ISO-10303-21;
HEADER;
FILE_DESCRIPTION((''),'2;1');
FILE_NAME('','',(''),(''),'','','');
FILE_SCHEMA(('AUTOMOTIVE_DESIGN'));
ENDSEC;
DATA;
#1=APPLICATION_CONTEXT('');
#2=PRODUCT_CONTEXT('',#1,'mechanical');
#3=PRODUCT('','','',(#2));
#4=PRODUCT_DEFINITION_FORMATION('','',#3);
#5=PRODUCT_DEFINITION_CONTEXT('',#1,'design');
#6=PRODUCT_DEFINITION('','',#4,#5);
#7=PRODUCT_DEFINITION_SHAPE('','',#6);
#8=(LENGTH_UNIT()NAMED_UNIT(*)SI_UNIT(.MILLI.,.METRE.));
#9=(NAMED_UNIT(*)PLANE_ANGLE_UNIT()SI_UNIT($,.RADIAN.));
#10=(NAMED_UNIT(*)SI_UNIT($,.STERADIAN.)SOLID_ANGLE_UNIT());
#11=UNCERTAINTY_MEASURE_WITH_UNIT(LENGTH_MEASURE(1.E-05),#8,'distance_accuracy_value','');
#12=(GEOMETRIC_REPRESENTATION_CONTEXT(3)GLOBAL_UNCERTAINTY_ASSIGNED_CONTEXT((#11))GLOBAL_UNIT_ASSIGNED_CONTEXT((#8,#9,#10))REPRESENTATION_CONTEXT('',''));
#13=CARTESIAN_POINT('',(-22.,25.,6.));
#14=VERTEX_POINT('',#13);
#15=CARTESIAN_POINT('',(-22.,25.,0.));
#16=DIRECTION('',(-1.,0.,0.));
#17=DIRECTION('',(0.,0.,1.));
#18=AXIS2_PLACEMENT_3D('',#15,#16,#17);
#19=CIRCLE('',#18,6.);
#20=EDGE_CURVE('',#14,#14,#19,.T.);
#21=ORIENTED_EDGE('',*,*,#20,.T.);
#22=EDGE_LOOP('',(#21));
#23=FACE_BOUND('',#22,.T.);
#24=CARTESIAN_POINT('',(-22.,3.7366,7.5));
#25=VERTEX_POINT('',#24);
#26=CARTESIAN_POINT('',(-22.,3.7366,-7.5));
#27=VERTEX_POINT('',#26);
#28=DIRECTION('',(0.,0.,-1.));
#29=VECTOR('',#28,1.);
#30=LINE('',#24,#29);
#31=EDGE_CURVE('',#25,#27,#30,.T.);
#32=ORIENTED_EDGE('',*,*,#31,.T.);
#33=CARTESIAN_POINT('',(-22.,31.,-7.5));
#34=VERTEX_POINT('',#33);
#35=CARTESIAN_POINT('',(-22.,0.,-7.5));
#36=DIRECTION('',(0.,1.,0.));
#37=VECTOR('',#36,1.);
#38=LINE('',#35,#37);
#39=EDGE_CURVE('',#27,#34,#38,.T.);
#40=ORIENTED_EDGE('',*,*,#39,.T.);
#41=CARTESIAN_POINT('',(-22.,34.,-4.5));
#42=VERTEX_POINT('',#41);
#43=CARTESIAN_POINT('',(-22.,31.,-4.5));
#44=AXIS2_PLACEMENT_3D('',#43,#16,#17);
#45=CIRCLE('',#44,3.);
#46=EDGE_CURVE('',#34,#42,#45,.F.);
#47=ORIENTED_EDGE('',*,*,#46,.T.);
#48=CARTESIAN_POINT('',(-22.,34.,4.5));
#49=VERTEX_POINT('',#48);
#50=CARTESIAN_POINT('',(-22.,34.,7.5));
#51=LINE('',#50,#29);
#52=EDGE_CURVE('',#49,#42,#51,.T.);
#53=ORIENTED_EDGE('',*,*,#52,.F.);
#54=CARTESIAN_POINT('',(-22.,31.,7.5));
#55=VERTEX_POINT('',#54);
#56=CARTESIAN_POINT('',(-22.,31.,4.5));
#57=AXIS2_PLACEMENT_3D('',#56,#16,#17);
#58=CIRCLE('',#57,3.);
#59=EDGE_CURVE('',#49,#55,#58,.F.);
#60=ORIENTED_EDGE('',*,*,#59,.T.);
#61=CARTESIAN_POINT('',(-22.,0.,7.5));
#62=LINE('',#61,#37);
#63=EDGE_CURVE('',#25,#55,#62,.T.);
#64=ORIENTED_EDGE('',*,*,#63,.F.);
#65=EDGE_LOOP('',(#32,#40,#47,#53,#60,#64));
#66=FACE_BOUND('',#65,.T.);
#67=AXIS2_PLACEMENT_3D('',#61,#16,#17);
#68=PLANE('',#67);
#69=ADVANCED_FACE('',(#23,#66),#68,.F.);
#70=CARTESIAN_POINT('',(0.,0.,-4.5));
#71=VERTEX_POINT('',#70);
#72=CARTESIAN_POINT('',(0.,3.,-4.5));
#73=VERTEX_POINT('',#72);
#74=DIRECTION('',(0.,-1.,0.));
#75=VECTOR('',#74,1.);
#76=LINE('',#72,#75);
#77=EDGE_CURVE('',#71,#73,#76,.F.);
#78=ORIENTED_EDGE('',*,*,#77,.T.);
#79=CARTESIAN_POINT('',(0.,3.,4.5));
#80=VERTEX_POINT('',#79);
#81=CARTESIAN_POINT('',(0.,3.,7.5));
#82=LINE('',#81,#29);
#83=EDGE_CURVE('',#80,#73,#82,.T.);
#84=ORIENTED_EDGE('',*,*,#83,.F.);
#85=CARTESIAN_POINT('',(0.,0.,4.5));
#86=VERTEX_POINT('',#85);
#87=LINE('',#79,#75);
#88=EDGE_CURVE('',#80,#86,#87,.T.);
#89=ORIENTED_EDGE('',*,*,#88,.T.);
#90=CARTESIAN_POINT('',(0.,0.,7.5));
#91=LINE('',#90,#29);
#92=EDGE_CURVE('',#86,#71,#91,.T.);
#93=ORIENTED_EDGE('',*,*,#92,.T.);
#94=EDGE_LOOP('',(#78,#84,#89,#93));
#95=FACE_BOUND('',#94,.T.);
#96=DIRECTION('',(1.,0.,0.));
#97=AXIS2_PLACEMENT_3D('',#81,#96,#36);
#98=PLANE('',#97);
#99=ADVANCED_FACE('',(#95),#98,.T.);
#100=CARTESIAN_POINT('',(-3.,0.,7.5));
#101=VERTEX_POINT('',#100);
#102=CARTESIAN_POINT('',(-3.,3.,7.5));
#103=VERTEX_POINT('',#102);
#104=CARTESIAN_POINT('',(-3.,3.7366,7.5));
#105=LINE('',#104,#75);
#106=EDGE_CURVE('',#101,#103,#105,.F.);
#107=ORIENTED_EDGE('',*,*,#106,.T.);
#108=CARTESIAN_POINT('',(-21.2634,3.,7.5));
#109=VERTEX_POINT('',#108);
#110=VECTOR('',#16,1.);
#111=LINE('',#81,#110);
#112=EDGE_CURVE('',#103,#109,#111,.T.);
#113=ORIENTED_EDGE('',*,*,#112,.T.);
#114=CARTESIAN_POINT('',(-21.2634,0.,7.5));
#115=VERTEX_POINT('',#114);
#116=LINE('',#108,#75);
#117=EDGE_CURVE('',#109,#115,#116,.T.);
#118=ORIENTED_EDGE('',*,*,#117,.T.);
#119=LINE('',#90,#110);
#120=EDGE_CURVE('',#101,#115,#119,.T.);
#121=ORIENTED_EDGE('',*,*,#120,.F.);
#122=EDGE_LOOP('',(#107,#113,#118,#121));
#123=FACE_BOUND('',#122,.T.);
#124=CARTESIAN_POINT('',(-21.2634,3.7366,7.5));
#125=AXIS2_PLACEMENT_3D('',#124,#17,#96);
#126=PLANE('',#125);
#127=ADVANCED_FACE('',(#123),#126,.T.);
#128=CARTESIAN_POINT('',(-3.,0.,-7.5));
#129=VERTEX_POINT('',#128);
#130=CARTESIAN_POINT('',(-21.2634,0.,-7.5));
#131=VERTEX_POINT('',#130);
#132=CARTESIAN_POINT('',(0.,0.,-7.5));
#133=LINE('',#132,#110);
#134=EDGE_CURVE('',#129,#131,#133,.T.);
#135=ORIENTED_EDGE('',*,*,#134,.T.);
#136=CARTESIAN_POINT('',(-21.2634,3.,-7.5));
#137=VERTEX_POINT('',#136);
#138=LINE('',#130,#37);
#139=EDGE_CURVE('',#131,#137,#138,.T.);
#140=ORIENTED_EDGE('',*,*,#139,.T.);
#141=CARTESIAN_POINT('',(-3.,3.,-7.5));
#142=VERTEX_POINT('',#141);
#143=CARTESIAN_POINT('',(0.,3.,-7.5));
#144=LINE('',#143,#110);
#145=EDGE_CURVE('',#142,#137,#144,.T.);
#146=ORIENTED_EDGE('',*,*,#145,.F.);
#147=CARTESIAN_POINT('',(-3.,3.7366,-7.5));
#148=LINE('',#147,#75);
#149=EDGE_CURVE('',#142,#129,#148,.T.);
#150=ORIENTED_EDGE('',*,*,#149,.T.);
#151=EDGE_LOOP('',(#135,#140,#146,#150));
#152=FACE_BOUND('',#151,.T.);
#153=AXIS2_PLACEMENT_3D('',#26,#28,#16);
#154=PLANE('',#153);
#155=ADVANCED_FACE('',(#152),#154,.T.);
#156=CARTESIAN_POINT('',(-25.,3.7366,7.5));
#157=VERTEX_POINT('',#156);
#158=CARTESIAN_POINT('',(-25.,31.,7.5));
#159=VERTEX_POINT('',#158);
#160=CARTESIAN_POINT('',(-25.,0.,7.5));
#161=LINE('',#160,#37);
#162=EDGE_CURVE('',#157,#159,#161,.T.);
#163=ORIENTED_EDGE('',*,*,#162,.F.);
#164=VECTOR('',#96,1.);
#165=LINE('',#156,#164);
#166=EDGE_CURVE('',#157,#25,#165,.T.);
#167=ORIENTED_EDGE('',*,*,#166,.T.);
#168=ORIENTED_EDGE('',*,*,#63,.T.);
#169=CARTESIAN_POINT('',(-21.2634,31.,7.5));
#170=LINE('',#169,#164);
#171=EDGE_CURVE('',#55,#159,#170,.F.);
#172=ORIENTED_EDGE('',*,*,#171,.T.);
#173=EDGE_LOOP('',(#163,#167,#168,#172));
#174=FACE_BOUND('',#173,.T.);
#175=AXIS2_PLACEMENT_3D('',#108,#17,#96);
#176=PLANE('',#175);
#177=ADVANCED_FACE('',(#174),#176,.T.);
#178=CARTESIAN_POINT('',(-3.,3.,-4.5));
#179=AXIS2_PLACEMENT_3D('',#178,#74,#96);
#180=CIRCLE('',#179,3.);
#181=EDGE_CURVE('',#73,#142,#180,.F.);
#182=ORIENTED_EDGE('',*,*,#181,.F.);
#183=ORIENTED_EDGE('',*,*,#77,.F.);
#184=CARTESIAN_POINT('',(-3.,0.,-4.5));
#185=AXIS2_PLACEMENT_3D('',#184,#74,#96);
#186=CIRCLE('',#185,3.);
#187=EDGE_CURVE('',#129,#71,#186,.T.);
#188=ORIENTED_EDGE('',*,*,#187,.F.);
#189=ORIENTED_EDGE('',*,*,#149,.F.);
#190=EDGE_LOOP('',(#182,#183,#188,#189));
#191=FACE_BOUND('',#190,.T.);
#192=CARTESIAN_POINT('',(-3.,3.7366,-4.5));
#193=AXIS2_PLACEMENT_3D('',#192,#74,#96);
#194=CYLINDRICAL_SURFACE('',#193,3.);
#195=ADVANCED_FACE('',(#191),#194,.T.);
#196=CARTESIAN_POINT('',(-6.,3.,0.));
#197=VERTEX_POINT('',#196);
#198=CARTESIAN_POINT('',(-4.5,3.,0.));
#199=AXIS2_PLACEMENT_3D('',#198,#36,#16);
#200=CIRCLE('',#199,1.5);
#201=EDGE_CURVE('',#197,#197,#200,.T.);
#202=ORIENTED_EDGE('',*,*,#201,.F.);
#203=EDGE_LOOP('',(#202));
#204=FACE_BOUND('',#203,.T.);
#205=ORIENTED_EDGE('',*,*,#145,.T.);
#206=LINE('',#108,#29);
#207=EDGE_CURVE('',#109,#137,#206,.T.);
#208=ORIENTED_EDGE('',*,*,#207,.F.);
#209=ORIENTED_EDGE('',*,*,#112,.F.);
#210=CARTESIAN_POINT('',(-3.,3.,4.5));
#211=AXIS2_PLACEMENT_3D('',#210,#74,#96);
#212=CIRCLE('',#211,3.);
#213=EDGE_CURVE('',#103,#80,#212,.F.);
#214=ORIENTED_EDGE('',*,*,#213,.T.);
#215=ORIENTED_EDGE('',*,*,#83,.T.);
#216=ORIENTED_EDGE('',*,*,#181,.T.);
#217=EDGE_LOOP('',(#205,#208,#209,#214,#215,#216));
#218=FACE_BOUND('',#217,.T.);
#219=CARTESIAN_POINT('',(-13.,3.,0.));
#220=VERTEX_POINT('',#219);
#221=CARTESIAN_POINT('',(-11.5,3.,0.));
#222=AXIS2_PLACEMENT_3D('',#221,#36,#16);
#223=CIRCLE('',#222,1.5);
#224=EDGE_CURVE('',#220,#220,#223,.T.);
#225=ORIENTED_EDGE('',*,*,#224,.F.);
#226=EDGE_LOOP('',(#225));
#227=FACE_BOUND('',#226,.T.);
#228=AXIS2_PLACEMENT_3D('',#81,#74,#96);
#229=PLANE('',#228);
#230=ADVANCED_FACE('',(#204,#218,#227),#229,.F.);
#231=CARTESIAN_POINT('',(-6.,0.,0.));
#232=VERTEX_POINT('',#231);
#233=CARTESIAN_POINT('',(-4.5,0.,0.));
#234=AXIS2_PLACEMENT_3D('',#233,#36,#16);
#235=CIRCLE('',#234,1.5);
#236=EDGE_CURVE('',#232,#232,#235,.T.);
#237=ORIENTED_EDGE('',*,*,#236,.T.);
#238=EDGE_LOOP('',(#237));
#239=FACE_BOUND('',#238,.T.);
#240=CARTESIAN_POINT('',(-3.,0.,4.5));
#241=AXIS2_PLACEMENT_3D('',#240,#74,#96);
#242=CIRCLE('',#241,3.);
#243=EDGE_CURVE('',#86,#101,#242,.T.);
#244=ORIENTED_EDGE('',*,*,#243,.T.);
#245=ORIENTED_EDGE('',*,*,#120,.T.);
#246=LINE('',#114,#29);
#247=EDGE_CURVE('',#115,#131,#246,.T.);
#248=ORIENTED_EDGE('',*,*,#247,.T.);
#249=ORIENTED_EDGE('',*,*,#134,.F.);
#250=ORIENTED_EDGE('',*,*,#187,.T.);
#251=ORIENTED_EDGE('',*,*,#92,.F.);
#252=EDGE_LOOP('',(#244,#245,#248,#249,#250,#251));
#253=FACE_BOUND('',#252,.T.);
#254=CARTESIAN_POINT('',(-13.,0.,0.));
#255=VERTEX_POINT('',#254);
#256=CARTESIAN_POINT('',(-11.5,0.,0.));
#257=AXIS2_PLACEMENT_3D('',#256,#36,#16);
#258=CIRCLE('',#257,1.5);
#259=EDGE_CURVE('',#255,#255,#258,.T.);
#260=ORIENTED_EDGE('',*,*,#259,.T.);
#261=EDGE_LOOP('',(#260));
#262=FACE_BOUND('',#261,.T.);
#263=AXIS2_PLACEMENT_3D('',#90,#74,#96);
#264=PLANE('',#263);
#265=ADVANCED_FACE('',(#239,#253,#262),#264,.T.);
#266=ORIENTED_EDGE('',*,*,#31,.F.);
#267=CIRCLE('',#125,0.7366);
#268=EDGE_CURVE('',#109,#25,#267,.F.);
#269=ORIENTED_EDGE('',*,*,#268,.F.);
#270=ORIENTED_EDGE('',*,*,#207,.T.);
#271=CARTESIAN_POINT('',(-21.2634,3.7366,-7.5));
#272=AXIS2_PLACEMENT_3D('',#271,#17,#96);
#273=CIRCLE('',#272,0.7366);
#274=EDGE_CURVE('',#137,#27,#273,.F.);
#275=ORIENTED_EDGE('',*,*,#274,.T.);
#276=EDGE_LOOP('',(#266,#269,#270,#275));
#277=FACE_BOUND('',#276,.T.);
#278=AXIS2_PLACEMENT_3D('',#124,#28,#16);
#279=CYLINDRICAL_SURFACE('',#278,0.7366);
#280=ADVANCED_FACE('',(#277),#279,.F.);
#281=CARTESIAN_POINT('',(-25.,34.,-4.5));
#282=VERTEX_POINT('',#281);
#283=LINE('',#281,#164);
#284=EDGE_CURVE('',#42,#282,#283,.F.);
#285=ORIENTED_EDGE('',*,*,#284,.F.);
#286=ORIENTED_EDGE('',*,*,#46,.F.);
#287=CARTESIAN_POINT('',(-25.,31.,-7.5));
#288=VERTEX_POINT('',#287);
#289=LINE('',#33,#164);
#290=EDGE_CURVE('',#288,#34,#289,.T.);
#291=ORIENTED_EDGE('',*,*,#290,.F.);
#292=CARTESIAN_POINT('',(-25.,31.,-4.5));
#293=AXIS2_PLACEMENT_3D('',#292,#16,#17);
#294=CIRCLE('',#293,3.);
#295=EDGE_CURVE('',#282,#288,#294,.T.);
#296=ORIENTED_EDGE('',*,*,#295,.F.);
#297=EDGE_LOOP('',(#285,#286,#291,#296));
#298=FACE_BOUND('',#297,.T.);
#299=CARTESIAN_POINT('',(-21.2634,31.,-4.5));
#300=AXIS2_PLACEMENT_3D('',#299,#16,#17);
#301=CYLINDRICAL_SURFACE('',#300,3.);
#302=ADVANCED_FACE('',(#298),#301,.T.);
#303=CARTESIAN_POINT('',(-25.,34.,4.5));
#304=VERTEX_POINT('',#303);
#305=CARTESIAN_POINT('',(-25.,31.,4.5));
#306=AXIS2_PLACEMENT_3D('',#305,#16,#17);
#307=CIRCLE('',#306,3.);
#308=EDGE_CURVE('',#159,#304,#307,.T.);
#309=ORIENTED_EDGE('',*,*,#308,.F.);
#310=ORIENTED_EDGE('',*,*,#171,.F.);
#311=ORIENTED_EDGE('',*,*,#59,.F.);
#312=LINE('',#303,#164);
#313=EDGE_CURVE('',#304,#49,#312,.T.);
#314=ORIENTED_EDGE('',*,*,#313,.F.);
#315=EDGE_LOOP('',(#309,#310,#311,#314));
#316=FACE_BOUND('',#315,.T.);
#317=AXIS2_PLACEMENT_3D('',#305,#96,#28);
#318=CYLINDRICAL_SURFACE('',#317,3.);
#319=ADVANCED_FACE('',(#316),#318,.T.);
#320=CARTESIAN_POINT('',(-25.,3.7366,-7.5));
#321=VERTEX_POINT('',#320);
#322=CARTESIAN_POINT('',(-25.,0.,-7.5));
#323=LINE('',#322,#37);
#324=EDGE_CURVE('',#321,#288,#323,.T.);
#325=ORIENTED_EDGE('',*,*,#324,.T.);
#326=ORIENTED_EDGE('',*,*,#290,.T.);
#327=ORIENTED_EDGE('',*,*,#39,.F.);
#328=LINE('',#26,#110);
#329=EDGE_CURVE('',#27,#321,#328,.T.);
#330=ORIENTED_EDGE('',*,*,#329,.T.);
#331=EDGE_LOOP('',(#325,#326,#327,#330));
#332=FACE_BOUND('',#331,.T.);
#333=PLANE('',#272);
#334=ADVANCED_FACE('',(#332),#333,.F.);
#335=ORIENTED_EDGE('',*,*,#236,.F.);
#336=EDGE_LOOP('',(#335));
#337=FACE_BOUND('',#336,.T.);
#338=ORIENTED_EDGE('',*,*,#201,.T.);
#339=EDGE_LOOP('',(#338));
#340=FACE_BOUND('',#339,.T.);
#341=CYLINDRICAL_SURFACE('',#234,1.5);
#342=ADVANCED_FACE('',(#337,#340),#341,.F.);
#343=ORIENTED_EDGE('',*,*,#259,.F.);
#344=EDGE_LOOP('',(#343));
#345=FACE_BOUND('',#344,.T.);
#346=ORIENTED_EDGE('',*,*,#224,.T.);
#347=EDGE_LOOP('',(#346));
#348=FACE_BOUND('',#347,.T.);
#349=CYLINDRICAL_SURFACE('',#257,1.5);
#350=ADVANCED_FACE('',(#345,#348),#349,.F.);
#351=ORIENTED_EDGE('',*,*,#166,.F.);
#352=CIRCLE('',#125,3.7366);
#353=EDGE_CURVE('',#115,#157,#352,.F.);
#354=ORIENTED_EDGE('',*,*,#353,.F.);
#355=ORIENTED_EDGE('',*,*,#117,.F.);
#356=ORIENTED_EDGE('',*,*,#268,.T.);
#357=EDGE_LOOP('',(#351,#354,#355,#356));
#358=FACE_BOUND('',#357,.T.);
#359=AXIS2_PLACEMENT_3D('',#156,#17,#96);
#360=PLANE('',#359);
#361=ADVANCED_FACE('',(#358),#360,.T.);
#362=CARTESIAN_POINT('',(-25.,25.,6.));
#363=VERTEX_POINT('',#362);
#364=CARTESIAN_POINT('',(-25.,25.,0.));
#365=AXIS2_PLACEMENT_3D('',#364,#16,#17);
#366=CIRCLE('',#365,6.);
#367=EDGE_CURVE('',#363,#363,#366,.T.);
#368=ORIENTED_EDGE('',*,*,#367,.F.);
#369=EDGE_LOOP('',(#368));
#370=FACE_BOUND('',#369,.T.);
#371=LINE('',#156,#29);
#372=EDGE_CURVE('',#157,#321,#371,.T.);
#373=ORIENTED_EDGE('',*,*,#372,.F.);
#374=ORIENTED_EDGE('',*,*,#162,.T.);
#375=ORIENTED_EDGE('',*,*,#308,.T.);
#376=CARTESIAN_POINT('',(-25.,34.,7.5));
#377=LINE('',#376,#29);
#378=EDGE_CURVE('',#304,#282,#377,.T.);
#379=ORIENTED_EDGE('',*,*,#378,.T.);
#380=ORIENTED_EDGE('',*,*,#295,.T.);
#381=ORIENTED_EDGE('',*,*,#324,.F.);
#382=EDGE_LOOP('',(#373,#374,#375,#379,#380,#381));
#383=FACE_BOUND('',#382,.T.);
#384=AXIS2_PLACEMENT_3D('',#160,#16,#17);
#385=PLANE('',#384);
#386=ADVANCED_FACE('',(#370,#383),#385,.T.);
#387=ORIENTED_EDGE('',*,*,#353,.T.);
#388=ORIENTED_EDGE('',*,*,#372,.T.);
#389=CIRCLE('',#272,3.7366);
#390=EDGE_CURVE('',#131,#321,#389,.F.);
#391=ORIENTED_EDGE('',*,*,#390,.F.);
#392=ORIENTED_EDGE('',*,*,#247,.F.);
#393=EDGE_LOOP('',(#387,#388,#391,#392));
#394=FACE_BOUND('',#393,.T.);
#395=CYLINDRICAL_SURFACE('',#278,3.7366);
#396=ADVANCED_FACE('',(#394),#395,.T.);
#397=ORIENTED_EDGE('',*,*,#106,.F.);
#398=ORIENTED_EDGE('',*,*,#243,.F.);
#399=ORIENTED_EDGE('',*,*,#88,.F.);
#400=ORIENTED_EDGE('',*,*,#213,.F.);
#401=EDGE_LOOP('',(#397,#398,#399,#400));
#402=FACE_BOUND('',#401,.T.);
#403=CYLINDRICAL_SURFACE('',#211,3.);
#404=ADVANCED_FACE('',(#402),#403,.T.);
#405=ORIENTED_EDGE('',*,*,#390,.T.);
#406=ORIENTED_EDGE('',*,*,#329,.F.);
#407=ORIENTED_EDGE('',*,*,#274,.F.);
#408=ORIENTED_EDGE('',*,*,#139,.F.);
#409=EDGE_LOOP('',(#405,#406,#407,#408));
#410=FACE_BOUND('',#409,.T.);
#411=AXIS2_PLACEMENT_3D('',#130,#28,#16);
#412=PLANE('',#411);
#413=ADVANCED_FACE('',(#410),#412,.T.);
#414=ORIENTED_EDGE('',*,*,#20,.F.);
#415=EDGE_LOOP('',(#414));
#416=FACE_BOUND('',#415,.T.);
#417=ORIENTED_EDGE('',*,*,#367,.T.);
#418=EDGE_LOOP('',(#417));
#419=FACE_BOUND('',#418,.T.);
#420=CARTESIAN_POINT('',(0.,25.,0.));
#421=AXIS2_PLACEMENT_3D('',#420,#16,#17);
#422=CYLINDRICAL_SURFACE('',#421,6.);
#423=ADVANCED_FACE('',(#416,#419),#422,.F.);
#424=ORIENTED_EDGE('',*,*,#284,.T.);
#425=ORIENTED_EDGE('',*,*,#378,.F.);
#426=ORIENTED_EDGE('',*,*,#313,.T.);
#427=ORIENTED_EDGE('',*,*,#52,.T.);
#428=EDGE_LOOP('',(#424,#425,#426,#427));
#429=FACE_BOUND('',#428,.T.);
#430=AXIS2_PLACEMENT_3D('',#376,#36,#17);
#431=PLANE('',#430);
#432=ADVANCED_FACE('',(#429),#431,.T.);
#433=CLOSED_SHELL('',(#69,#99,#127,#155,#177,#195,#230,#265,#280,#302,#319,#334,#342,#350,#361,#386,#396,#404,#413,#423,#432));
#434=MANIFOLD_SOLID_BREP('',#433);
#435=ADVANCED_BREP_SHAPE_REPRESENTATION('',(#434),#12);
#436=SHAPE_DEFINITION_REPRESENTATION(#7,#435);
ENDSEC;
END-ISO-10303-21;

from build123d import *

# Parameters (mm, degrees)
BASE_FLANGE1_DEPTH = 7.5
SKETCH6_R          = 6
CUT_EXTRUDE1_DEPTH = 43.86315434
SKETCH7_R          = 1.5
CUT_EXTRUDE2_DEPTH = 41.524683836
FILLET1_R          = 3


# Sheet-metal steps are written as plain solids
with BuildPart() as part:
    # Sketch1 → Base-Flange1 (new, symmetric)
    with BuildSketch(Plane.XY):
        with BuildLine():
            Line((0, 0), (-21.2634, 0))
            ThreePointArc((-21.2634, 0), (-23.905575199, 1.094424801), (-25, 3.7366))
            Line((-25, 3.7366), (-25, 34))
            Line((-25, 34), (-22, 34))
            Line((-22, 34), (-22, 3.7366))
            ThreePointArc((-22, 3.7366), (-21.784254855, 3.215745145), (-21.2634, 3))
            Line((-21.2634, 3), (0, 3))
            Line((0, 3), (0, 0))
        make_face()
    extrude(amount=BASE_FLANGE1_DEPTH, both=True)

    # Sketch6 → Cut-Extrude1 (cut, through all)
    with BuildSketch(Plane.ZY.offset(25)):
        with Locations((0, 25)):
            Circle(SKETCH6_R)
    extrude(amount=-CUT_EXTRUDE1_DEPTH, mode=Mode.SUBTRACT)

    # Sketch7 → Cut-Extrude2 (cut, through all)
    with BuildSketch(Plane(origin=(0, 3, 0), x_dir=(1, 0, 0), z_dir=(0, 1, 0))):
        with Locations(Location((-4.5, 0, 0), (0, 0, 180))):
            Circle(SKETCH7_R)
        with Locations(Location((-11.5, 0, 0), (0, 0, 180))):
            Circle(SKETCH7_R)
    extrude(amount=-CUT_EXTRUDE2_DEPTH, mode=Mode.SUBTRACT)

    # Fillet1
    fillet1_edges = [part.edges().sort_by_distance(p)[0] for p in [
        (0, 1.5, 7.5),
        (0, 1.5, -7.5),
        (-23.5, 34, 7.5),
        (-23.5, 34, -7.5),
    ]]
    fillet(fillet1_edges, radius=FILLET1_R)


solid = part.part
